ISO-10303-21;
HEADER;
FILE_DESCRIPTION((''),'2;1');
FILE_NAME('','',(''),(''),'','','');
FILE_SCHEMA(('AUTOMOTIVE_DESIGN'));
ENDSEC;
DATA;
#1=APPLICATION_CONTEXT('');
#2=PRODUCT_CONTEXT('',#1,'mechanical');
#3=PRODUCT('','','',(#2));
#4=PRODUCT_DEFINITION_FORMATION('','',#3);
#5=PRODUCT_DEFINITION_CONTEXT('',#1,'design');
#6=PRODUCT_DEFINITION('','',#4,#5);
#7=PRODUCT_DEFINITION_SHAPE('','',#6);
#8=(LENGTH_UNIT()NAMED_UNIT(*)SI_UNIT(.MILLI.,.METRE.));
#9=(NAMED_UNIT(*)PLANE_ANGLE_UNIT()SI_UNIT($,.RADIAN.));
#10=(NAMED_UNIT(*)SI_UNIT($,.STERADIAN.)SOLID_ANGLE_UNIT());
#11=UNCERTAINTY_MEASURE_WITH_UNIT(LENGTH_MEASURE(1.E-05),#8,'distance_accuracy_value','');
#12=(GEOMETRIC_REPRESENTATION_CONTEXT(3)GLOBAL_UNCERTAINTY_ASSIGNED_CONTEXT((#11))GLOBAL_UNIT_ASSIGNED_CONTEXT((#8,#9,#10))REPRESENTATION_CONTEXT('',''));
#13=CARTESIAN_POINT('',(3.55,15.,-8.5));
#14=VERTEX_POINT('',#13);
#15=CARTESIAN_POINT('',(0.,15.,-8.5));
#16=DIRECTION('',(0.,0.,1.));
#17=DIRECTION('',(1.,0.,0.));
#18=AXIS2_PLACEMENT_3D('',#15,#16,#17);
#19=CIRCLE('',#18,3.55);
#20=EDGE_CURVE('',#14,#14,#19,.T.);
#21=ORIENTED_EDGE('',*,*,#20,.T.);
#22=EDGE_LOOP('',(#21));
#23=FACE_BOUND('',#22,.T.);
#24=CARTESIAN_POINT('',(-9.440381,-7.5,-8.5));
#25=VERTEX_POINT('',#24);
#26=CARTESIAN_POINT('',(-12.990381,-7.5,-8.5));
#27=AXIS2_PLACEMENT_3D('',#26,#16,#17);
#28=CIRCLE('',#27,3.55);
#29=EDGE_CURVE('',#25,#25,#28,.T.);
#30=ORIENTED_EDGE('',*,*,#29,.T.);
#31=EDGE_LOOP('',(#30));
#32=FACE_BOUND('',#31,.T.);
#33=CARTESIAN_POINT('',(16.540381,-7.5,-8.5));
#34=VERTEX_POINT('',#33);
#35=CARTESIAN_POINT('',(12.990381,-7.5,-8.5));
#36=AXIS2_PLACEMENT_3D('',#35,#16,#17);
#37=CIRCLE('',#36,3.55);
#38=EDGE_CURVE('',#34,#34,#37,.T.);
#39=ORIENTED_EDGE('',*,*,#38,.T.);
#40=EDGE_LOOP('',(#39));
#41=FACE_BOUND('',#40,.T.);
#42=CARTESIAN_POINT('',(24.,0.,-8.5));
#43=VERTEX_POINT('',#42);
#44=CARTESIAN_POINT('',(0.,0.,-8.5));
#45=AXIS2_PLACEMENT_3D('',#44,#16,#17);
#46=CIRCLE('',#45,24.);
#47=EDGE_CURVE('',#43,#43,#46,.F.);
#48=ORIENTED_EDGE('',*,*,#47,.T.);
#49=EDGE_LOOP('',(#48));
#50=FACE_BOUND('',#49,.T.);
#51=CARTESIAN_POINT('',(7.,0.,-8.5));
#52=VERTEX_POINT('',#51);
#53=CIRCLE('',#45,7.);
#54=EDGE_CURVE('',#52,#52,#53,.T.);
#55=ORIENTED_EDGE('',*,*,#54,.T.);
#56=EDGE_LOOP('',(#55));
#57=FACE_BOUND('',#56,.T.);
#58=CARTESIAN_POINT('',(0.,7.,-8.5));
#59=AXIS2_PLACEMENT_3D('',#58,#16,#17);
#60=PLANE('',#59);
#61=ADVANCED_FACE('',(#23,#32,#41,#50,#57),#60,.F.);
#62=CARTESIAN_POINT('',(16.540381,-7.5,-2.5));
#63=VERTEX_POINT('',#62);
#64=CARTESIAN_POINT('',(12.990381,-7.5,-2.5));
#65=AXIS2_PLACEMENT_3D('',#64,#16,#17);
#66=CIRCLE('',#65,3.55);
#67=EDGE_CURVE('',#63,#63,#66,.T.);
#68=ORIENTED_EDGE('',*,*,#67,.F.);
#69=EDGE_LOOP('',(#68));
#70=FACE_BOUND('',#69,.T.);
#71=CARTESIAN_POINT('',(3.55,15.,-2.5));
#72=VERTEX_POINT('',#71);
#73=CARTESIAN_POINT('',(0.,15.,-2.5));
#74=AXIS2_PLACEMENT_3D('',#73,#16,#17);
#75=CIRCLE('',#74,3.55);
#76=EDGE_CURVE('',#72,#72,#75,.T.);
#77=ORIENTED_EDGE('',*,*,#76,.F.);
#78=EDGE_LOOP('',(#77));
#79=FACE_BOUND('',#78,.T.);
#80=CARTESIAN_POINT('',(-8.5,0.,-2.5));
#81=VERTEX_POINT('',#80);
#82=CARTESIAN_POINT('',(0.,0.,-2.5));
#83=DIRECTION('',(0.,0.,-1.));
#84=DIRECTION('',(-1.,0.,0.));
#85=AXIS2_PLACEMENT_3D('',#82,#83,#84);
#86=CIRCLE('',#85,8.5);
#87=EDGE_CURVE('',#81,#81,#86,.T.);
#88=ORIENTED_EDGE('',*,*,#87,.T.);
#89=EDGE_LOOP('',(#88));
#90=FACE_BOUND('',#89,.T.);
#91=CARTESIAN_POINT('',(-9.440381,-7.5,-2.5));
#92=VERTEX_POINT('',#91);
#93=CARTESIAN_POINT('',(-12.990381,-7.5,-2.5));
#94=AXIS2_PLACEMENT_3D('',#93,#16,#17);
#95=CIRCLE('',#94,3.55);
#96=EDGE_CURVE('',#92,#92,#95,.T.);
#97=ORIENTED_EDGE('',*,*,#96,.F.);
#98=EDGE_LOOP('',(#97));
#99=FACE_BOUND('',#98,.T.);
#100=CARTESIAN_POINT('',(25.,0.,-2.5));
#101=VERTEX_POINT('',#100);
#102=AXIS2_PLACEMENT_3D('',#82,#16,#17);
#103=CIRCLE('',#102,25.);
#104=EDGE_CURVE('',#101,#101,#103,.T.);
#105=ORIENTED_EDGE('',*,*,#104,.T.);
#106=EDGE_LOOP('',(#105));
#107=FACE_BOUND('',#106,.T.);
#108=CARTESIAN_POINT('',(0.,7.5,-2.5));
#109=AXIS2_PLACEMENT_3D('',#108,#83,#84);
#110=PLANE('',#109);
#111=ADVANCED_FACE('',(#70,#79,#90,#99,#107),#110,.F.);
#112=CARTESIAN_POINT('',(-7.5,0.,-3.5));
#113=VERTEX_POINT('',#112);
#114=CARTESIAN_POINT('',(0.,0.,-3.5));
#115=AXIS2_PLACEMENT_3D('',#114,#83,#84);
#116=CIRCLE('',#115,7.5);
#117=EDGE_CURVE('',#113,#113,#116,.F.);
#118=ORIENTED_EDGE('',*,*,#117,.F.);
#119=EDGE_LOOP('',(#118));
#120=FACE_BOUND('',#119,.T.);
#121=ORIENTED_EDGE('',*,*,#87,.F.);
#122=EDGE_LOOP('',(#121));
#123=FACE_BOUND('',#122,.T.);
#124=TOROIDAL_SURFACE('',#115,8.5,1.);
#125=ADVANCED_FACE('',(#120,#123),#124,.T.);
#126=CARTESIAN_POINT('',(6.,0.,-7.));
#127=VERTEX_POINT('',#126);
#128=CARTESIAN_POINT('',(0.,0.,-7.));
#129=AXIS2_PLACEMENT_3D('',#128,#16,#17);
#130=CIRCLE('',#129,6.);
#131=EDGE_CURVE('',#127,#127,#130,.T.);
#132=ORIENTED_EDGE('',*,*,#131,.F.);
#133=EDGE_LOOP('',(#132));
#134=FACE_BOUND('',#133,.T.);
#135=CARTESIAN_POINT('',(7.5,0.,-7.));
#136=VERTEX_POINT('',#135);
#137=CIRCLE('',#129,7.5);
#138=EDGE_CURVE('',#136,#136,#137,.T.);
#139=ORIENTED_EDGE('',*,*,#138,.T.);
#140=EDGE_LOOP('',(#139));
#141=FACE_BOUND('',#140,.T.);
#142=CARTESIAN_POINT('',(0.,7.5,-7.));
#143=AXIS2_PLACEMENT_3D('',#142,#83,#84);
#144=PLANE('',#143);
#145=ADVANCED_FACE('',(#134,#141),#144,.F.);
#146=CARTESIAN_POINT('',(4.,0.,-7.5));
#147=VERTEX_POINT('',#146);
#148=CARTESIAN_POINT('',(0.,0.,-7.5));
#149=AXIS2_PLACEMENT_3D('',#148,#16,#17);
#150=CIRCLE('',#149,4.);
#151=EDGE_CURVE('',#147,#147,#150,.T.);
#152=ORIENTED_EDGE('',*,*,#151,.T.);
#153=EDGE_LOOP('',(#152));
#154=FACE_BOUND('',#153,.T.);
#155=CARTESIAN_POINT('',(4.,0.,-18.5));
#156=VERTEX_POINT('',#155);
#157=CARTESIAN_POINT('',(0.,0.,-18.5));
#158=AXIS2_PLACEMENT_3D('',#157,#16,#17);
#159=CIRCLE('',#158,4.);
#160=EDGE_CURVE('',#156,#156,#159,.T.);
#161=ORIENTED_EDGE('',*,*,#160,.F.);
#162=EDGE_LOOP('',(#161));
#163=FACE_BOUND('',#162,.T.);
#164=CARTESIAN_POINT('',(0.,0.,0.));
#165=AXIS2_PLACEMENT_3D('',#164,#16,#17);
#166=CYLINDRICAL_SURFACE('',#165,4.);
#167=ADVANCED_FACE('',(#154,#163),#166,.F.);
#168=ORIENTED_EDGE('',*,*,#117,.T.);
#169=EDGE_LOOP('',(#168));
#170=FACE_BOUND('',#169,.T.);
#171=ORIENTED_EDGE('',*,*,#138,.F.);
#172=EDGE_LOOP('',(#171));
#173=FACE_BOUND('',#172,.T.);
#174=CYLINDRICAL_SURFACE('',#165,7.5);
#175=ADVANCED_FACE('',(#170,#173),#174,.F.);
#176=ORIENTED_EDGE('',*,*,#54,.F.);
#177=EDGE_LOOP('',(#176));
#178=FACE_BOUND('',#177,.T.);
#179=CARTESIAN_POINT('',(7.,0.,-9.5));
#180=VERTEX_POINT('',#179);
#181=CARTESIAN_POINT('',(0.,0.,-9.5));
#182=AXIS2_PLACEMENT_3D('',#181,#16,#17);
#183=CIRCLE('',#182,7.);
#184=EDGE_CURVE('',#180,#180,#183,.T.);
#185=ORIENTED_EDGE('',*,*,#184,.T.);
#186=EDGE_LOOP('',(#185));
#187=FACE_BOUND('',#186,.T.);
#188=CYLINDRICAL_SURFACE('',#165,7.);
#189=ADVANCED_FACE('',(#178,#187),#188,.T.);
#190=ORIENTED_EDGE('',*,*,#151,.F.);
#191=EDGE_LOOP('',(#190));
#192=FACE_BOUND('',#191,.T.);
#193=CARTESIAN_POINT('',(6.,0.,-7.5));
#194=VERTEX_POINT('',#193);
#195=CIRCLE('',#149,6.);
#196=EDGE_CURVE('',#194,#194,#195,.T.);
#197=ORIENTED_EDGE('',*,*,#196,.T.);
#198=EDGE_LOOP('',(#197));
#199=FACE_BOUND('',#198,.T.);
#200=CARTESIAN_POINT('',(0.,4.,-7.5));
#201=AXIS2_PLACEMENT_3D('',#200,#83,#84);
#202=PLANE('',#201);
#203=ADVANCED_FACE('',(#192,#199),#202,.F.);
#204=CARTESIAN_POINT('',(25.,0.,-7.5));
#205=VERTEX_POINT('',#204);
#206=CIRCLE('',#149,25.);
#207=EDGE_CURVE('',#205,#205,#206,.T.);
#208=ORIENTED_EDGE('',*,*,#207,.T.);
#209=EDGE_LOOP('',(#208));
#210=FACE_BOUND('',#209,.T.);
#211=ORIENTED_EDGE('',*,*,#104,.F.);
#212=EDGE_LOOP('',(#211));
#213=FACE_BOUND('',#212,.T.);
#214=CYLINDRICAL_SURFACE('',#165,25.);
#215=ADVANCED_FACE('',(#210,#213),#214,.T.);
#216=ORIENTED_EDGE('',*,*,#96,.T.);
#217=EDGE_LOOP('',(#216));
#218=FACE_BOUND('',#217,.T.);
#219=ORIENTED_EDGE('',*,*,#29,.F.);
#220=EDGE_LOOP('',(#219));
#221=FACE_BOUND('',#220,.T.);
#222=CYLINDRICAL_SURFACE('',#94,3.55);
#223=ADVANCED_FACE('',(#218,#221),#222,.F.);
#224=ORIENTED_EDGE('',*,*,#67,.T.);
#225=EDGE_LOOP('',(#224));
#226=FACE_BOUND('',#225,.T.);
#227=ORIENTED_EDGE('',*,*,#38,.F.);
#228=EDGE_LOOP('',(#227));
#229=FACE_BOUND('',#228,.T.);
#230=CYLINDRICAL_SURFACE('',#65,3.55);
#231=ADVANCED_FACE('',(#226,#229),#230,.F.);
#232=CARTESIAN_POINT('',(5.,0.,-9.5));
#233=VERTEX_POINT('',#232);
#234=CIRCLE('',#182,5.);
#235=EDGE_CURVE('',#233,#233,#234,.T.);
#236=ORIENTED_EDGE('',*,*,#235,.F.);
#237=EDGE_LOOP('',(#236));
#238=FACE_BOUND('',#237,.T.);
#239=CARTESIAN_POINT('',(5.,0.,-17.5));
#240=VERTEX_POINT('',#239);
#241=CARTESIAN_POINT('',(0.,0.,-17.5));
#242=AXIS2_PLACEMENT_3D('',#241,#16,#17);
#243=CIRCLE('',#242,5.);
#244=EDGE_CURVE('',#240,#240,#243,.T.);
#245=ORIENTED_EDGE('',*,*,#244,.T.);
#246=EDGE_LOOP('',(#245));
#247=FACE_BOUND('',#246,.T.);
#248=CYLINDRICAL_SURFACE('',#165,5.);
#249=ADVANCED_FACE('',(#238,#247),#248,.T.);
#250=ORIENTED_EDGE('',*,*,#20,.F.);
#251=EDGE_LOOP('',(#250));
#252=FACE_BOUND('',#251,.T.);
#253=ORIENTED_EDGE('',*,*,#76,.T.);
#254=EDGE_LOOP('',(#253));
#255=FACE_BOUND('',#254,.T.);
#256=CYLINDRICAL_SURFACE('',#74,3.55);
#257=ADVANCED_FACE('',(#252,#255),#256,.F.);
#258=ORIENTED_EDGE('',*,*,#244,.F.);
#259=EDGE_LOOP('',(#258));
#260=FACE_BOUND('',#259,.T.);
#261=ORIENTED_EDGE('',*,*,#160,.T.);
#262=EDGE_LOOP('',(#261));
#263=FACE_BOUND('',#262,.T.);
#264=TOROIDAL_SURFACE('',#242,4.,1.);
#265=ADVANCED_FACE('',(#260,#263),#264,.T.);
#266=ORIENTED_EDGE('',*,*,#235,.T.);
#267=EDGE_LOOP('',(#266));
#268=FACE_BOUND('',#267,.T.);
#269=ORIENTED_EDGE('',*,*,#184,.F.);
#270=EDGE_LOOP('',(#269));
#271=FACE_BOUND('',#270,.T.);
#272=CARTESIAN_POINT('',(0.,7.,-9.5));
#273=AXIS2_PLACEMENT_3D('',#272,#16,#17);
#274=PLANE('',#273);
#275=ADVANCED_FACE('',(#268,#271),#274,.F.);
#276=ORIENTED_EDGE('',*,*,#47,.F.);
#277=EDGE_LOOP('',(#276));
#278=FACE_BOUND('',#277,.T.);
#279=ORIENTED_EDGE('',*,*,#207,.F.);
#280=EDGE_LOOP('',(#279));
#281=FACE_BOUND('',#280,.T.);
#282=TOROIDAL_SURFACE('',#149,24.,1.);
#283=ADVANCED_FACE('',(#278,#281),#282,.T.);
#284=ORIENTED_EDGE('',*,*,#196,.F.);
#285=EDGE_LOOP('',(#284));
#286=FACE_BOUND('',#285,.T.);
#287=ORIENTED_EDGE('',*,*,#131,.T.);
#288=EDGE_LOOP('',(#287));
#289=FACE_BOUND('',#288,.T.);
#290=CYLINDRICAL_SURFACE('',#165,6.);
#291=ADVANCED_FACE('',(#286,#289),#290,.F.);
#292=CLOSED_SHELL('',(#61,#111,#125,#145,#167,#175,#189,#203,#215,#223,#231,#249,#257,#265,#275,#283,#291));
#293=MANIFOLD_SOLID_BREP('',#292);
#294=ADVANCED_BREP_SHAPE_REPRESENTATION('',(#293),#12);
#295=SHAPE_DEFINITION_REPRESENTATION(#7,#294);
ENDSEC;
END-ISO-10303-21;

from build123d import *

# Parameters (mm, degrees)
KREISMUSTER1_COUNT = 3
VERRUNDUNG1_R      = 1


with BuildPart() as part:
    # Skizze2 → Rotation1 (revolve)
    with BuildSketch(Plane(origin=(0, 0, 0), x_dir=(0, 0, -1), z_dir=(1, 0, 0)), mode=Mode.PRIVATE) as rotation1_sk:
        Polygon((9.5, 7), (8.5, 7), (8.5, 25), (2.5, 25), (2.5, 7.5), (7, 7.5), (7, 6), (7.5, 6), (7.5, 4), (18.5, 4), (18.5, 5), (9.5, 5), align=None)
    revolve(rotation1_sk.sketch.rotate(Axis((0, 0, 0), (0, 0, -1)), 90), axis=Axis((0, 0, 0), (0, 0, -1)))

    # Skizze4 → Ø7.1 (7.1) Durchmesser Bohrung1 (revolve, cut)
    with BuildSketch(Plane(origin=(0, 15, -2.5), x_dir=(0, -1, 0), z_dir=(1, 0, 0))):
        Polygon((0, 0), (0, 11.633055198), (3.55, 9.5), (3.55, 0), align=None)
    f_7_1_7_1_durchmesser_bohrung1 = revolve(axis=Axis((0, 15, 3.85), (0, 0, -1)), mode=Mode.SUBTRACT)

    # Kreismuster1: Ø7.1 (7.1) Durchmesser Bohrung1 ×3 about axis
    kreismuster1_axis = Axis((0, 0, 0), (0, 0, 1))
    for i in range(1, KREISMUSTER1_COUNT):
        add(f_7_1_7_1_durchmesser_bohrung1.rotate(kreismuster1_axis, i * 360 / KREISMUSTER1_COUNT), mode=Mode.SUBTRACT)

    # Verrundung1
    verrundung1_edges = [part.edges().sort_by_distance(p)[0] for p in [
        (-25, 0, -8.5),
        (-7.5, 0, -2.5),
        (-5, 0, -18.5),
    ]]
    fillet(verrundung1_edges, radius=VERRUNDUNG1_R - 0.0001)  # a hair under: the kernel refuses the full size


solid = part.part
